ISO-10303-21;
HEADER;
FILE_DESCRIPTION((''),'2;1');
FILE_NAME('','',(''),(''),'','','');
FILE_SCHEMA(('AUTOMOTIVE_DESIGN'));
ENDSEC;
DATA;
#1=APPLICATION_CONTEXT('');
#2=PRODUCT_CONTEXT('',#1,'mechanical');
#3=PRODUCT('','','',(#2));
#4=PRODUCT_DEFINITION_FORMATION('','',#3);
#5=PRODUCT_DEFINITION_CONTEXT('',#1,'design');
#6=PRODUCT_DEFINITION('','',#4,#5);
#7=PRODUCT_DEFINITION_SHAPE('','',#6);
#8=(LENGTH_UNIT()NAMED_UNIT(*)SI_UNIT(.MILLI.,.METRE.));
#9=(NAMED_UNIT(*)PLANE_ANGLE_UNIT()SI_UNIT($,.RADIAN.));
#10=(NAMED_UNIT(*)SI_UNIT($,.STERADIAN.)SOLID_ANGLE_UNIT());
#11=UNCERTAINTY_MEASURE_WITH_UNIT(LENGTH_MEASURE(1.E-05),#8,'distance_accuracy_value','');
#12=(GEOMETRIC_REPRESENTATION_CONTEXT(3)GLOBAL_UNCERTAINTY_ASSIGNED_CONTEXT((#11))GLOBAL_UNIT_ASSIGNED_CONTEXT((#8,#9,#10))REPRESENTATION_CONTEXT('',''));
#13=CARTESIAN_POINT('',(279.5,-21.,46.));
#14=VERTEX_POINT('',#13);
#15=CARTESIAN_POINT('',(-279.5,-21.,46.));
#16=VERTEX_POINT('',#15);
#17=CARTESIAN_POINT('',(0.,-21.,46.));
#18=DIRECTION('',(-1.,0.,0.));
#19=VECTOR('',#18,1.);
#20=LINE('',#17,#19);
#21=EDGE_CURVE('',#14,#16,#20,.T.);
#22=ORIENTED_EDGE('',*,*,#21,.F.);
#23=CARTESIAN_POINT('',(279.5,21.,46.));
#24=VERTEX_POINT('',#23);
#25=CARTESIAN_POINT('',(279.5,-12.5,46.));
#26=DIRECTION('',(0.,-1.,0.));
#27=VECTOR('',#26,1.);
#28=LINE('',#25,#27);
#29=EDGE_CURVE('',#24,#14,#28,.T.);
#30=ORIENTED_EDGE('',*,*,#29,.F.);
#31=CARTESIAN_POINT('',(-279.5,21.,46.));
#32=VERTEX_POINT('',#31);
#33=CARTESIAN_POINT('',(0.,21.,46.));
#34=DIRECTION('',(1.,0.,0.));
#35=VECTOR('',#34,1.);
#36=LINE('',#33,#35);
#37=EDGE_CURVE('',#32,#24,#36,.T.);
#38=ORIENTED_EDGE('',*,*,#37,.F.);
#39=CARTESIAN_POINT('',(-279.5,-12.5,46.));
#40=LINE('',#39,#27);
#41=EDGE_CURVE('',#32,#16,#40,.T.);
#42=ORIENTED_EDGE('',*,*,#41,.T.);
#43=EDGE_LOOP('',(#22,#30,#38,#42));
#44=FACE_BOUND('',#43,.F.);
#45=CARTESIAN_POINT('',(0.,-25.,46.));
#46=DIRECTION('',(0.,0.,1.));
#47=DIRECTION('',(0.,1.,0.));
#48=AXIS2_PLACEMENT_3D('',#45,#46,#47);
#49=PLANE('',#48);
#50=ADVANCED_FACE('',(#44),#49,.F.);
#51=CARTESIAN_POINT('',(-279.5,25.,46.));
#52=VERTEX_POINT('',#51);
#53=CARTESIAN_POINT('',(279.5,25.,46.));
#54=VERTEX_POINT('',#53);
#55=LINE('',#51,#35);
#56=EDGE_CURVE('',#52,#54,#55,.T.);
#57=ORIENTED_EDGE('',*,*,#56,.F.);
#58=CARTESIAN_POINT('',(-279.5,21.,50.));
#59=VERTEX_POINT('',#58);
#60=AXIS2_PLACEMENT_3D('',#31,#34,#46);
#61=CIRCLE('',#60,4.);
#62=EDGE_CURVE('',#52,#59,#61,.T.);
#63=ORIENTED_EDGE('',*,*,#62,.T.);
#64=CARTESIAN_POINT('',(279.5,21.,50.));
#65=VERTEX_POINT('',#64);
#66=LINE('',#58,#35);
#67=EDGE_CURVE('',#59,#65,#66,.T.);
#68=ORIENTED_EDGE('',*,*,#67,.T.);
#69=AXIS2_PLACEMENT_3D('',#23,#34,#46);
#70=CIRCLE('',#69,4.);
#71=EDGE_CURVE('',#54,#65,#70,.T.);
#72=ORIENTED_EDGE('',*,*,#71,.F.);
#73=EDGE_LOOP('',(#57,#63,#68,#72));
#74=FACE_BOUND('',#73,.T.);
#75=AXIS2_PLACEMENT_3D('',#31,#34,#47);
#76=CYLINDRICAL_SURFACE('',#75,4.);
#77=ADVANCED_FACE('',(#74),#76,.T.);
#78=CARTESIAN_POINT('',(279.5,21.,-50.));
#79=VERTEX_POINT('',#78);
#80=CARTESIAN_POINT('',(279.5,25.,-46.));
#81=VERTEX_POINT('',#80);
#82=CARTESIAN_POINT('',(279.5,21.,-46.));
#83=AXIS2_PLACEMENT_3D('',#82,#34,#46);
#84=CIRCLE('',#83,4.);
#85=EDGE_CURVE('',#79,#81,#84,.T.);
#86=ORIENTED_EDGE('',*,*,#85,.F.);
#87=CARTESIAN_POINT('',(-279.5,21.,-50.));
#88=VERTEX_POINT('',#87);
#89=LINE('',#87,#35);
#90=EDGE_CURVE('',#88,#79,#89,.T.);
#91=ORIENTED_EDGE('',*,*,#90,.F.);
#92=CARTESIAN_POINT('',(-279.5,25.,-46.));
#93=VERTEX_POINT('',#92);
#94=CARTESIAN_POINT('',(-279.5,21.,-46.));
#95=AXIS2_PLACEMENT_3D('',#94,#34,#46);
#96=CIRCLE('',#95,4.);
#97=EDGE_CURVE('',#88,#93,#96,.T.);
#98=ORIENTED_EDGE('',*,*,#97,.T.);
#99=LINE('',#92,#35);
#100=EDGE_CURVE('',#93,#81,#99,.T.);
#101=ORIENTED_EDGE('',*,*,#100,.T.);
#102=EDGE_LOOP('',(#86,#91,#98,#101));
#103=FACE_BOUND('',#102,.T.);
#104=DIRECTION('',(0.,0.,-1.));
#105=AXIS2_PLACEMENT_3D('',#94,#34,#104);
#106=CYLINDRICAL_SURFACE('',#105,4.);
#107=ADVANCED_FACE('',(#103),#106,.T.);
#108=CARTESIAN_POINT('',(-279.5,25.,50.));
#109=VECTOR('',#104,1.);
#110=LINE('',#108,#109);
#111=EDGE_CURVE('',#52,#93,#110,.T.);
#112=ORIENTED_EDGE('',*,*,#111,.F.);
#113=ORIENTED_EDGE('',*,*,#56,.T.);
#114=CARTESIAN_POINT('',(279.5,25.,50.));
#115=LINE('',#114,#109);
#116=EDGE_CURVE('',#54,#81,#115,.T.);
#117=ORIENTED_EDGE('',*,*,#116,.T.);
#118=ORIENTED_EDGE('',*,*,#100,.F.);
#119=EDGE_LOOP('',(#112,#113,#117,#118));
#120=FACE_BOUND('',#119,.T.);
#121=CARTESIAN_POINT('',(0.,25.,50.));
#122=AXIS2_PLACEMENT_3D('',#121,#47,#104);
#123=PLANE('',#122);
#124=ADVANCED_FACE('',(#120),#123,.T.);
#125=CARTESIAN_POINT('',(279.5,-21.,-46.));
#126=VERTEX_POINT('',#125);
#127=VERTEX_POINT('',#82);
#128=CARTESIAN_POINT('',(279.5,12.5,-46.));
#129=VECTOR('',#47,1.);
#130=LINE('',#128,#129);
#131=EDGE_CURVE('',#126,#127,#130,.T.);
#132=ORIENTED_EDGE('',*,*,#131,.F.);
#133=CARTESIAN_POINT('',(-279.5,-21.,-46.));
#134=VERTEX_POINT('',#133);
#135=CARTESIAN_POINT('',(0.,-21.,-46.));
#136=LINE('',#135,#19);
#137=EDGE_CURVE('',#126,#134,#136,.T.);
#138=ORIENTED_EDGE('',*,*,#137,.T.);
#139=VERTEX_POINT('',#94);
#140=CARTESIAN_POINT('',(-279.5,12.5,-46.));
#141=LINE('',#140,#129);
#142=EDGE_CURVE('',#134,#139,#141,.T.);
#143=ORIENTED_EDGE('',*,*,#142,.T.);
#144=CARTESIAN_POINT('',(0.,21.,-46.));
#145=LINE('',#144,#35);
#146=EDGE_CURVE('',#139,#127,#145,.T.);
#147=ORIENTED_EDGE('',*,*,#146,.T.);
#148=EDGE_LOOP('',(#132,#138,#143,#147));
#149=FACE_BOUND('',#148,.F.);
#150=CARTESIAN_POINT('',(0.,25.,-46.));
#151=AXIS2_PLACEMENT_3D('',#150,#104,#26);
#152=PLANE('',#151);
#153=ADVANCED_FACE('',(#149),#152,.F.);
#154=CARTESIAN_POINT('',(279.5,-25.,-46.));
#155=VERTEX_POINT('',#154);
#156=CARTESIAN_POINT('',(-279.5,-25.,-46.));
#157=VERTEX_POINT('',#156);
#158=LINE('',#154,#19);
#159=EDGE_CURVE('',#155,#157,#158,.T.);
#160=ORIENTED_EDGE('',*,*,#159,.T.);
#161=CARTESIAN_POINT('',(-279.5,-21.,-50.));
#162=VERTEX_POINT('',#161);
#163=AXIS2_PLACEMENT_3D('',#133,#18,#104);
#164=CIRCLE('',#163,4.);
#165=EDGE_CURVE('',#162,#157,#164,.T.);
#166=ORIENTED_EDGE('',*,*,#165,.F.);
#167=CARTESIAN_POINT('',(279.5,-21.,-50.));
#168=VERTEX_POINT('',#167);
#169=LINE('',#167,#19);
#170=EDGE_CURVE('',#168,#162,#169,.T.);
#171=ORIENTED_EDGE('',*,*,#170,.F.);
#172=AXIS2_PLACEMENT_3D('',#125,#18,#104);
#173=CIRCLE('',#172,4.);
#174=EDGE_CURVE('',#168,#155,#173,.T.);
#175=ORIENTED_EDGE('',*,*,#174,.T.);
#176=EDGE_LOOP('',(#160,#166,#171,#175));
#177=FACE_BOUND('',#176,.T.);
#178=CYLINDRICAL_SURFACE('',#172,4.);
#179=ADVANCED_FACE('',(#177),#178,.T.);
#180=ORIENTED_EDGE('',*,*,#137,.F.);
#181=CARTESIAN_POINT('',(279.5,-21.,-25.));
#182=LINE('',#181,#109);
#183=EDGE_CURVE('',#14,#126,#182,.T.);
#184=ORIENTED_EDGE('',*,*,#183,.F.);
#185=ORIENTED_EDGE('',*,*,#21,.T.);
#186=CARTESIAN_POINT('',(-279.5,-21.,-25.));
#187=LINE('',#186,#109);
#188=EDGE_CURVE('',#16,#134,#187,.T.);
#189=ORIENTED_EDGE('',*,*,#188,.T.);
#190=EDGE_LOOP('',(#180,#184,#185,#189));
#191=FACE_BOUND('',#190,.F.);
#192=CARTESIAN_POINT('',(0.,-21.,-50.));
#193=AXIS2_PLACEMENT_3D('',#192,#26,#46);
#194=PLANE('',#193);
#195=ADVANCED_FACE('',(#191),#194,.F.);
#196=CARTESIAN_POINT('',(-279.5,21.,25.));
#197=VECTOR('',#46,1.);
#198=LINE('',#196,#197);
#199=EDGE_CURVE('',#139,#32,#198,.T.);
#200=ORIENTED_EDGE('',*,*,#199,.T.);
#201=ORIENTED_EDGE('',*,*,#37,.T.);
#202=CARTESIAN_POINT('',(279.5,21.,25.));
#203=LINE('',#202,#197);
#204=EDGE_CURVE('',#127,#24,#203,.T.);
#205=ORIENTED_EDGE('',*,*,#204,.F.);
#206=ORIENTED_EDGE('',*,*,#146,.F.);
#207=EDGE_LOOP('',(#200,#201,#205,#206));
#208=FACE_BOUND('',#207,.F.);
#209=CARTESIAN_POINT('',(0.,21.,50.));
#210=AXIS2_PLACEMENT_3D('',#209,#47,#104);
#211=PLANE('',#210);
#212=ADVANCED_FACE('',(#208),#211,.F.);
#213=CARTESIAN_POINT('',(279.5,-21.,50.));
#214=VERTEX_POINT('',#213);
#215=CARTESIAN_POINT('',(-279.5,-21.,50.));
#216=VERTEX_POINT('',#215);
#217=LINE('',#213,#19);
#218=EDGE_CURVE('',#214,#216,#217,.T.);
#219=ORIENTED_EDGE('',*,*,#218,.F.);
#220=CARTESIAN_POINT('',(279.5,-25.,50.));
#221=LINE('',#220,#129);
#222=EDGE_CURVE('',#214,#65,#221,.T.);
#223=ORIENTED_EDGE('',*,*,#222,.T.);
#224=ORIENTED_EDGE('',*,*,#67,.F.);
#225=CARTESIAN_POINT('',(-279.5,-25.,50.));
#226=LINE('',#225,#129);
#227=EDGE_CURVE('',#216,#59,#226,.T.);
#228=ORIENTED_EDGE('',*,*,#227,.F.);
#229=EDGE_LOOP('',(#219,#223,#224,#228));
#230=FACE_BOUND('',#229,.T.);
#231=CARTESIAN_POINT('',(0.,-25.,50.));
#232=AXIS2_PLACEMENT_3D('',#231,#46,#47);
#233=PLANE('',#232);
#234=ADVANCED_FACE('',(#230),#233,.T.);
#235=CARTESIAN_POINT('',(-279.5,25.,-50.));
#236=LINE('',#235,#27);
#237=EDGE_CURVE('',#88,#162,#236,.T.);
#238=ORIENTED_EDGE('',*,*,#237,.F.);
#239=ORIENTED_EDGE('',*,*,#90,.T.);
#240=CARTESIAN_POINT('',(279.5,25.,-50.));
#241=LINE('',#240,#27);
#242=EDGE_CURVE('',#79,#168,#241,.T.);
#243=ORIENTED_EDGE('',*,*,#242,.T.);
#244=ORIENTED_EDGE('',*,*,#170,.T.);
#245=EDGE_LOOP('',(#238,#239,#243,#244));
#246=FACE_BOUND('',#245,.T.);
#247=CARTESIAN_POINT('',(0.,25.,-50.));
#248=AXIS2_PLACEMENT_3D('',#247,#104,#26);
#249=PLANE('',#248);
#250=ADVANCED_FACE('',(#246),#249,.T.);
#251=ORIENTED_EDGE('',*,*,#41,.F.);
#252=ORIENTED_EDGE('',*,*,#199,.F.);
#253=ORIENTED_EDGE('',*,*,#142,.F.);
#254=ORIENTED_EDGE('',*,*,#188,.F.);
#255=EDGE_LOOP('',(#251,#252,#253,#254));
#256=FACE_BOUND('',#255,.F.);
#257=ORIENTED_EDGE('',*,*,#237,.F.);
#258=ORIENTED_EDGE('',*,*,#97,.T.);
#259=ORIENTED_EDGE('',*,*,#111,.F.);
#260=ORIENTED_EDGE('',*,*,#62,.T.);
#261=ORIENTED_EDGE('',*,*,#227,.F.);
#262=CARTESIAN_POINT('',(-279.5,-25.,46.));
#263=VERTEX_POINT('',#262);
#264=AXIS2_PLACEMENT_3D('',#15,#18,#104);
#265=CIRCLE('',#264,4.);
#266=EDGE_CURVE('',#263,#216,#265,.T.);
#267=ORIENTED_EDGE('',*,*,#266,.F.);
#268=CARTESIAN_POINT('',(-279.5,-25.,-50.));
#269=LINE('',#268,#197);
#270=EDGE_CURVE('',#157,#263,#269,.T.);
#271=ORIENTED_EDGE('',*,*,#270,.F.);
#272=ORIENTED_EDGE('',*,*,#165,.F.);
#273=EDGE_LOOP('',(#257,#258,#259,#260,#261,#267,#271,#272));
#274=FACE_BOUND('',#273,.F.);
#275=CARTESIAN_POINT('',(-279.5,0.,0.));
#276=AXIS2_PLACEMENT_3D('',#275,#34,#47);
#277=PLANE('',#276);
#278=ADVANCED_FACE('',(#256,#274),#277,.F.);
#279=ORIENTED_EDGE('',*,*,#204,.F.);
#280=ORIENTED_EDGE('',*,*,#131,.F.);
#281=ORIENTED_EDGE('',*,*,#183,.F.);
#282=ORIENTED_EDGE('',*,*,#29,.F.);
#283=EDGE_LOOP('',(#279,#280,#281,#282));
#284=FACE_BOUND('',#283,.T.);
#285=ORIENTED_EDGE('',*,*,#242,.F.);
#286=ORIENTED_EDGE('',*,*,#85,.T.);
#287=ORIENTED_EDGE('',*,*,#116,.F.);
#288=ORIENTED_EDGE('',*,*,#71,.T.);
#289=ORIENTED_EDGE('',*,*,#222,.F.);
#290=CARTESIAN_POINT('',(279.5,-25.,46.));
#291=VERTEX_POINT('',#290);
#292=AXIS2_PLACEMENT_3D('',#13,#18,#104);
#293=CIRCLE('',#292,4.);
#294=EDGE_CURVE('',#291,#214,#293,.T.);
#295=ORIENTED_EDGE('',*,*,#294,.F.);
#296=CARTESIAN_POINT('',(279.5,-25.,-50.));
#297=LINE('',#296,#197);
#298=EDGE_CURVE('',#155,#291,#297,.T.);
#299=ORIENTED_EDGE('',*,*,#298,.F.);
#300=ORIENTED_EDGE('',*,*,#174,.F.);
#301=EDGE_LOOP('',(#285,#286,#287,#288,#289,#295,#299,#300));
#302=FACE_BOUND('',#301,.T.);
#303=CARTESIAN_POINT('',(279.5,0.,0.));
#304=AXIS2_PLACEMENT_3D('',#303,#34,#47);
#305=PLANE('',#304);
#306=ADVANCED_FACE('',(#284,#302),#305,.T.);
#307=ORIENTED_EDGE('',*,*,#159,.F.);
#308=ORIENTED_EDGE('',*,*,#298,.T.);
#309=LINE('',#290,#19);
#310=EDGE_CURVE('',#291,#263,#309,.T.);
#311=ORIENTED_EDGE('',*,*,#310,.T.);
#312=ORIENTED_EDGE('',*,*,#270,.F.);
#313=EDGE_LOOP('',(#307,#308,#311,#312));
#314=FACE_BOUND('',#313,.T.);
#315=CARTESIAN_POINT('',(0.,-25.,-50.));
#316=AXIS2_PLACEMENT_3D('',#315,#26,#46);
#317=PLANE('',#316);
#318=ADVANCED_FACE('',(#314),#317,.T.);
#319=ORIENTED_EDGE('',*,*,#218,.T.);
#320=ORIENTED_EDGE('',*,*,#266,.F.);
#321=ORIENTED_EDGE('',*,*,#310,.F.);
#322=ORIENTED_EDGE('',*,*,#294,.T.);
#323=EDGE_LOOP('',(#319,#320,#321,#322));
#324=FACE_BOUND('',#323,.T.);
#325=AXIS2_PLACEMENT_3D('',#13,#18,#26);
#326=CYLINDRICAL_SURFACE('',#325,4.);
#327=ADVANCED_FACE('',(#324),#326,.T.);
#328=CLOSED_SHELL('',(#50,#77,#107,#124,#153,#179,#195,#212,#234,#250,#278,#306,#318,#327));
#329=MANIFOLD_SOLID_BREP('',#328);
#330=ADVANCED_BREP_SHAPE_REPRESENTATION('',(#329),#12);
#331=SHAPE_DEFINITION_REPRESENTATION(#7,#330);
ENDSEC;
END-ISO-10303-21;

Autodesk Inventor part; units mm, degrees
ref_plane "YZ Plane" through (0, 0, 0) normal (1, 0, 0) x (0, 1, 0)
ref_plane "XZ Plane" through (0, 0, 0) normal (0, 1, 0) x (-1, 0, 0)
ref_plane "XY Plane" through (0, 0, 0) normal (0, 0, 1) x (1, 0, 0)
sketch "Sketch1" plane through (0, 0, 0) normal (1, 0, 0) x (0, 1, 0)
  line L0 (25, -50) -> (-25, -50)
  line L1 (-25, -50) -> (-25, 50)
  line L2 (-25, 50) -> (25, 50)
  line L3 (25, 50) -> (25, -50)
  line L4 (25, -50) -> (-25, 50) construction
  line L5 (-25, -50) -> (25, 50) construction
  point P0 (0, 0)
  dimension "d0" = 50
  dimension "d1" = 100
extrude "Extrusion1" add sketch "Sketch1" along normal mid plane 559
fillet "Fillet1" radius 4 4 edges at (0, 25, 50) (0, -25, 50) (0, -25, -50) (0, 25, -50)
shell "Shell1" thickness 4 removed faces 2 at (-279.5, -8.3333, -15.3333) at (279.5, -8.3333, -15.3333)
properties part number "MC03-1"
